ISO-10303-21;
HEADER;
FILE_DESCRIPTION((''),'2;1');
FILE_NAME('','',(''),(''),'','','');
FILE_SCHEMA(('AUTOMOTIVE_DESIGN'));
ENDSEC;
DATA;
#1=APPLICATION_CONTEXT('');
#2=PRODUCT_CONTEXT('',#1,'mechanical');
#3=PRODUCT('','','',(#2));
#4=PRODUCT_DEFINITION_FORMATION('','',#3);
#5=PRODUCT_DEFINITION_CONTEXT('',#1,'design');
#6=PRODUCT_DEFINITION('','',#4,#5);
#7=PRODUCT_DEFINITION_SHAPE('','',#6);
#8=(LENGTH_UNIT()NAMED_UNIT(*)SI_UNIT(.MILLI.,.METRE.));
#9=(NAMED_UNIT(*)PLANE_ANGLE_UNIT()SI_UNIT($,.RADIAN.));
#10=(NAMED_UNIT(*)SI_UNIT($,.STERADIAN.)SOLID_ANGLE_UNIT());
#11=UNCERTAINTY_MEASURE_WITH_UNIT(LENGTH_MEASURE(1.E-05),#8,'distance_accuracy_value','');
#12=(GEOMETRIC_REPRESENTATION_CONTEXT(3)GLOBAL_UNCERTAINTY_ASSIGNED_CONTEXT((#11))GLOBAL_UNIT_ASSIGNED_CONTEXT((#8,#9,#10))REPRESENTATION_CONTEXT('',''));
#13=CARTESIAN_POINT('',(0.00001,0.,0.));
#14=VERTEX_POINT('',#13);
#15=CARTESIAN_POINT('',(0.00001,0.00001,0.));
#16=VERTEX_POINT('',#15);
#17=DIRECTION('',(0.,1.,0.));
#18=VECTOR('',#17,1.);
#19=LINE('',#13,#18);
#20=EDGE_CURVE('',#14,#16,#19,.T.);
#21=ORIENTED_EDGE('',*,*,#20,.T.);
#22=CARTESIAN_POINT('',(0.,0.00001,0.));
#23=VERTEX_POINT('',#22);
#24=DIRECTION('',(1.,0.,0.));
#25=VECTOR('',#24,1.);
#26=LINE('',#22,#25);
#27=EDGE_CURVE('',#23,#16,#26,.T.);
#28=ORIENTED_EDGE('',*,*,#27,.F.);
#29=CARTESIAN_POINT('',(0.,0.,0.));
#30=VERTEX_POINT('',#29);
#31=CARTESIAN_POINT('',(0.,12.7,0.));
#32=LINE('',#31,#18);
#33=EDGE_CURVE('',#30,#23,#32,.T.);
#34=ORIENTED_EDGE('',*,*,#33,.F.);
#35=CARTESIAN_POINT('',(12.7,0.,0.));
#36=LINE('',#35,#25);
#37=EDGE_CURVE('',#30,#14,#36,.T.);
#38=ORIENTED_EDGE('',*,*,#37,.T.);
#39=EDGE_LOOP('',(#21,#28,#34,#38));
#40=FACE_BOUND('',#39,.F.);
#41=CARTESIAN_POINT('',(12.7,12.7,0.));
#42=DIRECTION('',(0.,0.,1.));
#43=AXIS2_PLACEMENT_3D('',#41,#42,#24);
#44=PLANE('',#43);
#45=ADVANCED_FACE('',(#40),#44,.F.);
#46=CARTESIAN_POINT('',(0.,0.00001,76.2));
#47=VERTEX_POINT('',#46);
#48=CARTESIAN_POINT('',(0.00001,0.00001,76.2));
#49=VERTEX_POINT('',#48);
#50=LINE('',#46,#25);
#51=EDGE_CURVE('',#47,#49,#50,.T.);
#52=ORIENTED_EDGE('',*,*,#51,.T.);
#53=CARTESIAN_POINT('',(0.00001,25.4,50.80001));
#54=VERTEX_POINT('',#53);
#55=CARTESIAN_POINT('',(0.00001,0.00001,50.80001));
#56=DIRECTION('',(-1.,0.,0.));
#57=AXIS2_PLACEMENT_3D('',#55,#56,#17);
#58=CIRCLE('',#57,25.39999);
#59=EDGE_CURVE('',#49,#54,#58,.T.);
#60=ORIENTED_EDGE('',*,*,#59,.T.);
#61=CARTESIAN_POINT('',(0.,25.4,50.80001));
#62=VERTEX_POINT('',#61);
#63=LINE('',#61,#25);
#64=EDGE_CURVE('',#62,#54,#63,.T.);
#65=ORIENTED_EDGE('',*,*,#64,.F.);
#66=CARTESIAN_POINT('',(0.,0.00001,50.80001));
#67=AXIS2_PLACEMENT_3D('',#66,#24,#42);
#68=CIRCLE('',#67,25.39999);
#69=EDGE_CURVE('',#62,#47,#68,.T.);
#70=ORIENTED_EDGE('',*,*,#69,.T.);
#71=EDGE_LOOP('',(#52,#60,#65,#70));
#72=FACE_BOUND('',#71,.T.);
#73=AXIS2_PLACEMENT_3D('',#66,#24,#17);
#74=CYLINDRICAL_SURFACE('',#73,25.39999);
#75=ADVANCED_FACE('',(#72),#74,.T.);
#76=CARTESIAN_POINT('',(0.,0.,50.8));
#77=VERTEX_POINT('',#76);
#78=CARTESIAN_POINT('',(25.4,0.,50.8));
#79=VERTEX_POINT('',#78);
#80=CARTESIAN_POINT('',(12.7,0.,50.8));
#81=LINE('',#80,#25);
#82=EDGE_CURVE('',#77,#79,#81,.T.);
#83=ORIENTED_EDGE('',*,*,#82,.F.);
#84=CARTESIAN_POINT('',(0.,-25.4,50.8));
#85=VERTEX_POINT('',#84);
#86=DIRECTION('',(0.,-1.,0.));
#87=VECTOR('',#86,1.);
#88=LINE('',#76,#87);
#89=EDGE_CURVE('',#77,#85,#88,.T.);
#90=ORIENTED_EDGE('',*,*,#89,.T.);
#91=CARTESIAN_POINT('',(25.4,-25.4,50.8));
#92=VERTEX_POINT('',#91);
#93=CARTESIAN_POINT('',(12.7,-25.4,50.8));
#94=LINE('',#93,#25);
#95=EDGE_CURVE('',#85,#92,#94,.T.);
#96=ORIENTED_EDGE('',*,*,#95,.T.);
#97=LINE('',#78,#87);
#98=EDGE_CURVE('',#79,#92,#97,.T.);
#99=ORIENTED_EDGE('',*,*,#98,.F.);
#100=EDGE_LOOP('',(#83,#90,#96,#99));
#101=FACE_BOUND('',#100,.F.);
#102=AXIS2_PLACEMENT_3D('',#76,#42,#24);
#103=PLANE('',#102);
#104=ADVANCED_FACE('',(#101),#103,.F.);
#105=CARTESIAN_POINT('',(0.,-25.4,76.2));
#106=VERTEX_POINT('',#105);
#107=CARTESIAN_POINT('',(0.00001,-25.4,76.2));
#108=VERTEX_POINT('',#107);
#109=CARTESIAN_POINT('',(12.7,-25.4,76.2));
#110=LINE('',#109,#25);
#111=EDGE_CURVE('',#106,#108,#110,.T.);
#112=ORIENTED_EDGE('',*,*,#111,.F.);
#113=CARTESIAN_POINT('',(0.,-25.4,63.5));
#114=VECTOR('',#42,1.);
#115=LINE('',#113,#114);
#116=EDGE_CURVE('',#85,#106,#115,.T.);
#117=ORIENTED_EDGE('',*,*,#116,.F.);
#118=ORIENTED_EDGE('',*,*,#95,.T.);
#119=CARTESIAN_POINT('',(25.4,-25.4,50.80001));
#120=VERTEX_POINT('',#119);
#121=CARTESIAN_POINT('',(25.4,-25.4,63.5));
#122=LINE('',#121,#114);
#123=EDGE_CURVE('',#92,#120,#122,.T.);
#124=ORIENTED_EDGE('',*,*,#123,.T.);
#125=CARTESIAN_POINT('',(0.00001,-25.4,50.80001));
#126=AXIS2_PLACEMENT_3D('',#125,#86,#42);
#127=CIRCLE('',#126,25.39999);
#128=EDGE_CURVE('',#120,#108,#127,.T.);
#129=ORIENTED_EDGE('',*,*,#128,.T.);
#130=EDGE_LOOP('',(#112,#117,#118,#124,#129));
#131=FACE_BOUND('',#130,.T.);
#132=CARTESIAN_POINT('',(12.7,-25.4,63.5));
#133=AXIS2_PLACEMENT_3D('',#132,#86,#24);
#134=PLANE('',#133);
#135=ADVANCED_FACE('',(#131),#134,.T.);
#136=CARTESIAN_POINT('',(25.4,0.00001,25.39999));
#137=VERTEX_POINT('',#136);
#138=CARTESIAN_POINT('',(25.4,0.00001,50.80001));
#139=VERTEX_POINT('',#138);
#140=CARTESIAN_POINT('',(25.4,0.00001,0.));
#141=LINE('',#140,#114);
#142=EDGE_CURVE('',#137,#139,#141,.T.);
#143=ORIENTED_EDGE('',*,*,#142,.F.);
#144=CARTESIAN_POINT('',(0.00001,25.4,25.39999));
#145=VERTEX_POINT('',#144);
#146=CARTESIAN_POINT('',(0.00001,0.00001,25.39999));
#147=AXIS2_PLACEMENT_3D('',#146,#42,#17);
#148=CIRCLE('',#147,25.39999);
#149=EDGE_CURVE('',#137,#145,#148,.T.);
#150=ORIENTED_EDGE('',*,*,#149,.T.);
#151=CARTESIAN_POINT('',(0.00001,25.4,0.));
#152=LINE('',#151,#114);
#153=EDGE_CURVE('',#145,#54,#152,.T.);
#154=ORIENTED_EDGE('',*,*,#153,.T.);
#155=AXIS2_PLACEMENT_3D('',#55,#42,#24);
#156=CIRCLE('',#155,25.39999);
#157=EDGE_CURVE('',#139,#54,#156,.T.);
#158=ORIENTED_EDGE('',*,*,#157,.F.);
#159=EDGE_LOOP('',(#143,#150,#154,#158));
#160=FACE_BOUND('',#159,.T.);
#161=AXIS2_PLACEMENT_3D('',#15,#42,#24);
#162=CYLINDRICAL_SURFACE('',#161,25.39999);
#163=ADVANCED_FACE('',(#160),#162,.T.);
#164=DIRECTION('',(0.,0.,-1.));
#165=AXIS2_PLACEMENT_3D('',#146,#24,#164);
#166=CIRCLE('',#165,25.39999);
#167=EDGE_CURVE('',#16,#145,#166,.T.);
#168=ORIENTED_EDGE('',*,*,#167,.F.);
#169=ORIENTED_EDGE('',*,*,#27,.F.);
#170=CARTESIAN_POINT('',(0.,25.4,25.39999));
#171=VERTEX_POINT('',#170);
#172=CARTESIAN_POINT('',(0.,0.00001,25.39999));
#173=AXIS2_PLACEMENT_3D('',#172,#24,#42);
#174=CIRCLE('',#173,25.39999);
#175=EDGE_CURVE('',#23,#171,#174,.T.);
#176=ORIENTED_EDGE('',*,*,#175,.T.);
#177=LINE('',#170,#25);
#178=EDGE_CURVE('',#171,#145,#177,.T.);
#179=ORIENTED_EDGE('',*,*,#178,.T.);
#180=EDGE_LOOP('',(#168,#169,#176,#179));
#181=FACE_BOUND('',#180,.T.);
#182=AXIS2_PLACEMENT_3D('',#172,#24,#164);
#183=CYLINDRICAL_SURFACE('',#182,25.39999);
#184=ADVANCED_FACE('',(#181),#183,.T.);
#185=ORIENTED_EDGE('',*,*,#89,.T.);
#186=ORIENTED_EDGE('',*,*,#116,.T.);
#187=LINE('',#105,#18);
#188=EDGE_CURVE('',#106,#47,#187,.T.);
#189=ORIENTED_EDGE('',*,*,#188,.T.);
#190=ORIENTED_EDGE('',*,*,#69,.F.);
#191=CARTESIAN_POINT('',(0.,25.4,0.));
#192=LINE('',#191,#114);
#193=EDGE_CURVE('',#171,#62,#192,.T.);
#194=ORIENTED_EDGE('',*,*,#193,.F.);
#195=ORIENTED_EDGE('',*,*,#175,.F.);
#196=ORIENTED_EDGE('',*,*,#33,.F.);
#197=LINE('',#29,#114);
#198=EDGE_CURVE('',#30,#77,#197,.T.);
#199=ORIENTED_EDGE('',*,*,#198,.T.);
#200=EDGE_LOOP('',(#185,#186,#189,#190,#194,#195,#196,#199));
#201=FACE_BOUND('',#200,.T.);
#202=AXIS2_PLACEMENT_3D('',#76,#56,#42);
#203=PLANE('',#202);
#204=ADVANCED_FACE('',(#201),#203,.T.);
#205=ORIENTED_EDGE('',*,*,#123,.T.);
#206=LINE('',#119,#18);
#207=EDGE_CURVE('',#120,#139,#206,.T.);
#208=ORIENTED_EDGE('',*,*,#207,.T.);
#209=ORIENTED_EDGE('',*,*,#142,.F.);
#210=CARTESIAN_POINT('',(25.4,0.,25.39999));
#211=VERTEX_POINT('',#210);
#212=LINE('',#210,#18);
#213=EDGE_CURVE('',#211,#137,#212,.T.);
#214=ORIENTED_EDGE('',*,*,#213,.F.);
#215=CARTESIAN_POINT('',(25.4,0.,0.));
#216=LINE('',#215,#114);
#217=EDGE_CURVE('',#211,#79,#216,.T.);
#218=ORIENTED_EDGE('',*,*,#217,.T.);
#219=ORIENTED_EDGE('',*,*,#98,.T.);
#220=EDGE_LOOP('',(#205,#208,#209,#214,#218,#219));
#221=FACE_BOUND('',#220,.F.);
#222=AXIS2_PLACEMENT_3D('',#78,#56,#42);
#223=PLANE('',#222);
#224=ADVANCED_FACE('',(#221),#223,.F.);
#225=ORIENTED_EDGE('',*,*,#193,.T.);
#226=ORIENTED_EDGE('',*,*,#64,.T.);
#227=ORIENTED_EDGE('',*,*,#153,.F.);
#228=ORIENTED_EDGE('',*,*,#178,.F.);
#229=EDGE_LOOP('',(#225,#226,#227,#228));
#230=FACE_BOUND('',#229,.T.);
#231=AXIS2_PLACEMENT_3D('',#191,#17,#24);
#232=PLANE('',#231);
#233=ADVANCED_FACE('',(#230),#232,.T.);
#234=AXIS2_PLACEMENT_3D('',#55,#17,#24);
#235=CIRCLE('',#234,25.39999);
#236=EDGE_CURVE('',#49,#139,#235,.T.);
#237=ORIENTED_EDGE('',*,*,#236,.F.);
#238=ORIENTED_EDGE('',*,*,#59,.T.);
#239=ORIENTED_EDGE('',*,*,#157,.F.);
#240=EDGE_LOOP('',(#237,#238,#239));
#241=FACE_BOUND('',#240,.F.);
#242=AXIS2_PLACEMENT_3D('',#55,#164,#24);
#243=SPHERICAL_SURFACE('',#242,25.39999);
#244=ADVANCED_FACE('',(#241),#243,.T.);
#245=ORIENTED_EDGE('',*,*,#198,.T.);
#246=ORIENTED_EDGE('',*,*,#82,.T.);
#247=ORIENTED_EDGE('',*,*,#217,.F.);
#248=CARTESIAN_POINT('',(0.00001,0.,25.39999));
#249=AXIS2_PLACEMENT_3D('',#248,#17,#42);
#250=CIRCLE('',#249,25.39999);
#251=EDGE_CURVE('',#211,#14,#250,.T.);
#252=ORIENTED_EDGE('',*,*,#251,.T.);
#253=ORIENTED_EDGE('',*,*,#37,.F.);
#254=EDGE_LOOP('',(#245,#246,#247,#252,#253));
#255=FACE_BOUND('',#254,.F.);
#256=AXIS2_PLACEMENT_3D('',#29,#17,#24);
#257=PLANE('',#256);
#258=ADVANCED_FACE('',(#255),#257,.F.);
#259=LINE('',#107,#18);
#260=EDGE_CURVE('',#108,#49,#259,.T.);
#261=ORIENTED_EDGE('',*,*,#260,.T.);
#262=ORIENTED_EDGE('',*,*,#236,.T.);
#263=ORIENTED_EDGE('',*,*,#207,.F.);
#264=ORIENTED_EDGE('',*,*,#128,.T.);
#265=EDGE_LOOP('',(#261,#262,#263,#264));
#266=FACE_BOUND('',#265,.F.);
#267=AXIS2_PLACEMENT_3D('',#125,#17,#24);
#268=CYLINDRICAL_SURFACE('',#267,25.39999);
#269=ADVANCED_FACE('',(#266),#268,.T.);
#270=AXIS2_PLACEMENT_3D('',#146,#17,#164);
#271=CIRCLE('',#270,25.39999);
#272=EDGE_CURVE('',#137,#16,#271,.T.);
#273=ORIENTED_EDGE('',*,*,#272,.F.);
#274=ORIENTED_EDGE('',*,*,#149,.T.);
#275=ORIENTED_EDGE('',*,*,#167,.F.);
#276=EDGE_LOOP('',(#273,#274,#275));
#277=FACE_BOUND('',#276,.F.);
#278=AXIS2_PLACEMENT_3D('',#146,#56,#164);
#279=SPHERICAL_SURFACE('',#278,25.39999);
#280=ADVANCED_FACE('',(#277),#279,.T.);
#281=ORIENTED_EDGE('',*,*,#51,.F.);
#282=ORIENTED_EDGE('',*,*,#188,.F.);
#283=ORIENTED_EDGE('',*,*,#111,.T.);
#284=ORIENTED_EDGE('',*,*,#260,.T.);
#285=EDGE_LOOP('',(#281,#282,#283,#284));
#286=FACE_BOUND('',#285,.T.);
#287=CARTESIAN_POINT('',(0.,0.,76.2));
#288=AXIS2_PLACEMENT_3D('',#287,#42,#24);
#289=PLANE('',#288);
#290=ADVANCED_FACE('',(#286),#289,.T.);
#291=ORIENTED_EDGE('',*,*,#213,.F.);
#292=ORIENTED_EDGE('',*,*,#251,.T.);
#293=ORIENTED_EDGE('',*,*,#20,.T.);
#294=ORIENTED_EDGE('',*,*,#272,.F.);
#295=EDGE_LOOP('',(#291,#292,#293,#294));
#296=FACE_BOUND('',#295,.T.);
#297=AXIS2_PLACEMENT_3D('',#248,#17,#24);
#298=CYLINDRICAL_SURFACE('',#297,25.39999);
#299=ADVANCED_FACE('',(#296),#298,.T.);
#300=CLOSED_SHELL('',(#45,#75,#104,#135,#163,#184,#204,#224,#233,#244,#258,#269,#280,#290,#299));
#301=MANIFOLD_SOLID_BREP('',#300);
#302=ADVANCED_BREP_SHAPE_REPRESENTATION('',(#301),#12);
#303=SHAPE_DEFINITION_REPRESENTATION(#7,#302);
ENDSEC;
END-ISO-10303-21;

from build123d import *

# Parameters (mm, degrees)
F0_W     = 25.4
F0_H     = 25.4
F1_DEPTH = 76.2
F2_W     = 25.4
F2_H     = 25.4
F3_DEPTH = 25.4
F4_R     = 25.39999


# Not quite as in the source:
# - a fillet or chamfer is up to 0.001 mm smaller than in the source, because OpenCascade refuses the exact size


with BuildPart() as f1:
    # F0 (on Top) → F1 (new body)
    with BuildSketch(Plane.XY):
        with Locations((12.7, 12.7)):
            Rectangle(F0_W, F0_H)
    extrude(amount=F1_DEPTH)

    # F2 (on face) → F3 (join)
    with BuildSketch(Plane.XZ):
        with Locations((12.7, 63.5)):
            Rectangle(F2_W, F2_H)
    extrude(amount=F3_DEPTH)

    # F4 (radius 25.4 in the source; OpenCascade refuses exactly that, so slightly less here)
    f4_edges = [f1.edges().sort_by_distance(p)[0] for p in [
        (12.7, 25.4, 0),
        (25.4, 12.7, 0),
        (25.4, 25.4, 38.1),
        (25.4, 0, 76.2),
        (12.7, 25.4, 76.2),
    ]]
    fillet(f4_edges, radius=F4_R)


solid = f1.part
